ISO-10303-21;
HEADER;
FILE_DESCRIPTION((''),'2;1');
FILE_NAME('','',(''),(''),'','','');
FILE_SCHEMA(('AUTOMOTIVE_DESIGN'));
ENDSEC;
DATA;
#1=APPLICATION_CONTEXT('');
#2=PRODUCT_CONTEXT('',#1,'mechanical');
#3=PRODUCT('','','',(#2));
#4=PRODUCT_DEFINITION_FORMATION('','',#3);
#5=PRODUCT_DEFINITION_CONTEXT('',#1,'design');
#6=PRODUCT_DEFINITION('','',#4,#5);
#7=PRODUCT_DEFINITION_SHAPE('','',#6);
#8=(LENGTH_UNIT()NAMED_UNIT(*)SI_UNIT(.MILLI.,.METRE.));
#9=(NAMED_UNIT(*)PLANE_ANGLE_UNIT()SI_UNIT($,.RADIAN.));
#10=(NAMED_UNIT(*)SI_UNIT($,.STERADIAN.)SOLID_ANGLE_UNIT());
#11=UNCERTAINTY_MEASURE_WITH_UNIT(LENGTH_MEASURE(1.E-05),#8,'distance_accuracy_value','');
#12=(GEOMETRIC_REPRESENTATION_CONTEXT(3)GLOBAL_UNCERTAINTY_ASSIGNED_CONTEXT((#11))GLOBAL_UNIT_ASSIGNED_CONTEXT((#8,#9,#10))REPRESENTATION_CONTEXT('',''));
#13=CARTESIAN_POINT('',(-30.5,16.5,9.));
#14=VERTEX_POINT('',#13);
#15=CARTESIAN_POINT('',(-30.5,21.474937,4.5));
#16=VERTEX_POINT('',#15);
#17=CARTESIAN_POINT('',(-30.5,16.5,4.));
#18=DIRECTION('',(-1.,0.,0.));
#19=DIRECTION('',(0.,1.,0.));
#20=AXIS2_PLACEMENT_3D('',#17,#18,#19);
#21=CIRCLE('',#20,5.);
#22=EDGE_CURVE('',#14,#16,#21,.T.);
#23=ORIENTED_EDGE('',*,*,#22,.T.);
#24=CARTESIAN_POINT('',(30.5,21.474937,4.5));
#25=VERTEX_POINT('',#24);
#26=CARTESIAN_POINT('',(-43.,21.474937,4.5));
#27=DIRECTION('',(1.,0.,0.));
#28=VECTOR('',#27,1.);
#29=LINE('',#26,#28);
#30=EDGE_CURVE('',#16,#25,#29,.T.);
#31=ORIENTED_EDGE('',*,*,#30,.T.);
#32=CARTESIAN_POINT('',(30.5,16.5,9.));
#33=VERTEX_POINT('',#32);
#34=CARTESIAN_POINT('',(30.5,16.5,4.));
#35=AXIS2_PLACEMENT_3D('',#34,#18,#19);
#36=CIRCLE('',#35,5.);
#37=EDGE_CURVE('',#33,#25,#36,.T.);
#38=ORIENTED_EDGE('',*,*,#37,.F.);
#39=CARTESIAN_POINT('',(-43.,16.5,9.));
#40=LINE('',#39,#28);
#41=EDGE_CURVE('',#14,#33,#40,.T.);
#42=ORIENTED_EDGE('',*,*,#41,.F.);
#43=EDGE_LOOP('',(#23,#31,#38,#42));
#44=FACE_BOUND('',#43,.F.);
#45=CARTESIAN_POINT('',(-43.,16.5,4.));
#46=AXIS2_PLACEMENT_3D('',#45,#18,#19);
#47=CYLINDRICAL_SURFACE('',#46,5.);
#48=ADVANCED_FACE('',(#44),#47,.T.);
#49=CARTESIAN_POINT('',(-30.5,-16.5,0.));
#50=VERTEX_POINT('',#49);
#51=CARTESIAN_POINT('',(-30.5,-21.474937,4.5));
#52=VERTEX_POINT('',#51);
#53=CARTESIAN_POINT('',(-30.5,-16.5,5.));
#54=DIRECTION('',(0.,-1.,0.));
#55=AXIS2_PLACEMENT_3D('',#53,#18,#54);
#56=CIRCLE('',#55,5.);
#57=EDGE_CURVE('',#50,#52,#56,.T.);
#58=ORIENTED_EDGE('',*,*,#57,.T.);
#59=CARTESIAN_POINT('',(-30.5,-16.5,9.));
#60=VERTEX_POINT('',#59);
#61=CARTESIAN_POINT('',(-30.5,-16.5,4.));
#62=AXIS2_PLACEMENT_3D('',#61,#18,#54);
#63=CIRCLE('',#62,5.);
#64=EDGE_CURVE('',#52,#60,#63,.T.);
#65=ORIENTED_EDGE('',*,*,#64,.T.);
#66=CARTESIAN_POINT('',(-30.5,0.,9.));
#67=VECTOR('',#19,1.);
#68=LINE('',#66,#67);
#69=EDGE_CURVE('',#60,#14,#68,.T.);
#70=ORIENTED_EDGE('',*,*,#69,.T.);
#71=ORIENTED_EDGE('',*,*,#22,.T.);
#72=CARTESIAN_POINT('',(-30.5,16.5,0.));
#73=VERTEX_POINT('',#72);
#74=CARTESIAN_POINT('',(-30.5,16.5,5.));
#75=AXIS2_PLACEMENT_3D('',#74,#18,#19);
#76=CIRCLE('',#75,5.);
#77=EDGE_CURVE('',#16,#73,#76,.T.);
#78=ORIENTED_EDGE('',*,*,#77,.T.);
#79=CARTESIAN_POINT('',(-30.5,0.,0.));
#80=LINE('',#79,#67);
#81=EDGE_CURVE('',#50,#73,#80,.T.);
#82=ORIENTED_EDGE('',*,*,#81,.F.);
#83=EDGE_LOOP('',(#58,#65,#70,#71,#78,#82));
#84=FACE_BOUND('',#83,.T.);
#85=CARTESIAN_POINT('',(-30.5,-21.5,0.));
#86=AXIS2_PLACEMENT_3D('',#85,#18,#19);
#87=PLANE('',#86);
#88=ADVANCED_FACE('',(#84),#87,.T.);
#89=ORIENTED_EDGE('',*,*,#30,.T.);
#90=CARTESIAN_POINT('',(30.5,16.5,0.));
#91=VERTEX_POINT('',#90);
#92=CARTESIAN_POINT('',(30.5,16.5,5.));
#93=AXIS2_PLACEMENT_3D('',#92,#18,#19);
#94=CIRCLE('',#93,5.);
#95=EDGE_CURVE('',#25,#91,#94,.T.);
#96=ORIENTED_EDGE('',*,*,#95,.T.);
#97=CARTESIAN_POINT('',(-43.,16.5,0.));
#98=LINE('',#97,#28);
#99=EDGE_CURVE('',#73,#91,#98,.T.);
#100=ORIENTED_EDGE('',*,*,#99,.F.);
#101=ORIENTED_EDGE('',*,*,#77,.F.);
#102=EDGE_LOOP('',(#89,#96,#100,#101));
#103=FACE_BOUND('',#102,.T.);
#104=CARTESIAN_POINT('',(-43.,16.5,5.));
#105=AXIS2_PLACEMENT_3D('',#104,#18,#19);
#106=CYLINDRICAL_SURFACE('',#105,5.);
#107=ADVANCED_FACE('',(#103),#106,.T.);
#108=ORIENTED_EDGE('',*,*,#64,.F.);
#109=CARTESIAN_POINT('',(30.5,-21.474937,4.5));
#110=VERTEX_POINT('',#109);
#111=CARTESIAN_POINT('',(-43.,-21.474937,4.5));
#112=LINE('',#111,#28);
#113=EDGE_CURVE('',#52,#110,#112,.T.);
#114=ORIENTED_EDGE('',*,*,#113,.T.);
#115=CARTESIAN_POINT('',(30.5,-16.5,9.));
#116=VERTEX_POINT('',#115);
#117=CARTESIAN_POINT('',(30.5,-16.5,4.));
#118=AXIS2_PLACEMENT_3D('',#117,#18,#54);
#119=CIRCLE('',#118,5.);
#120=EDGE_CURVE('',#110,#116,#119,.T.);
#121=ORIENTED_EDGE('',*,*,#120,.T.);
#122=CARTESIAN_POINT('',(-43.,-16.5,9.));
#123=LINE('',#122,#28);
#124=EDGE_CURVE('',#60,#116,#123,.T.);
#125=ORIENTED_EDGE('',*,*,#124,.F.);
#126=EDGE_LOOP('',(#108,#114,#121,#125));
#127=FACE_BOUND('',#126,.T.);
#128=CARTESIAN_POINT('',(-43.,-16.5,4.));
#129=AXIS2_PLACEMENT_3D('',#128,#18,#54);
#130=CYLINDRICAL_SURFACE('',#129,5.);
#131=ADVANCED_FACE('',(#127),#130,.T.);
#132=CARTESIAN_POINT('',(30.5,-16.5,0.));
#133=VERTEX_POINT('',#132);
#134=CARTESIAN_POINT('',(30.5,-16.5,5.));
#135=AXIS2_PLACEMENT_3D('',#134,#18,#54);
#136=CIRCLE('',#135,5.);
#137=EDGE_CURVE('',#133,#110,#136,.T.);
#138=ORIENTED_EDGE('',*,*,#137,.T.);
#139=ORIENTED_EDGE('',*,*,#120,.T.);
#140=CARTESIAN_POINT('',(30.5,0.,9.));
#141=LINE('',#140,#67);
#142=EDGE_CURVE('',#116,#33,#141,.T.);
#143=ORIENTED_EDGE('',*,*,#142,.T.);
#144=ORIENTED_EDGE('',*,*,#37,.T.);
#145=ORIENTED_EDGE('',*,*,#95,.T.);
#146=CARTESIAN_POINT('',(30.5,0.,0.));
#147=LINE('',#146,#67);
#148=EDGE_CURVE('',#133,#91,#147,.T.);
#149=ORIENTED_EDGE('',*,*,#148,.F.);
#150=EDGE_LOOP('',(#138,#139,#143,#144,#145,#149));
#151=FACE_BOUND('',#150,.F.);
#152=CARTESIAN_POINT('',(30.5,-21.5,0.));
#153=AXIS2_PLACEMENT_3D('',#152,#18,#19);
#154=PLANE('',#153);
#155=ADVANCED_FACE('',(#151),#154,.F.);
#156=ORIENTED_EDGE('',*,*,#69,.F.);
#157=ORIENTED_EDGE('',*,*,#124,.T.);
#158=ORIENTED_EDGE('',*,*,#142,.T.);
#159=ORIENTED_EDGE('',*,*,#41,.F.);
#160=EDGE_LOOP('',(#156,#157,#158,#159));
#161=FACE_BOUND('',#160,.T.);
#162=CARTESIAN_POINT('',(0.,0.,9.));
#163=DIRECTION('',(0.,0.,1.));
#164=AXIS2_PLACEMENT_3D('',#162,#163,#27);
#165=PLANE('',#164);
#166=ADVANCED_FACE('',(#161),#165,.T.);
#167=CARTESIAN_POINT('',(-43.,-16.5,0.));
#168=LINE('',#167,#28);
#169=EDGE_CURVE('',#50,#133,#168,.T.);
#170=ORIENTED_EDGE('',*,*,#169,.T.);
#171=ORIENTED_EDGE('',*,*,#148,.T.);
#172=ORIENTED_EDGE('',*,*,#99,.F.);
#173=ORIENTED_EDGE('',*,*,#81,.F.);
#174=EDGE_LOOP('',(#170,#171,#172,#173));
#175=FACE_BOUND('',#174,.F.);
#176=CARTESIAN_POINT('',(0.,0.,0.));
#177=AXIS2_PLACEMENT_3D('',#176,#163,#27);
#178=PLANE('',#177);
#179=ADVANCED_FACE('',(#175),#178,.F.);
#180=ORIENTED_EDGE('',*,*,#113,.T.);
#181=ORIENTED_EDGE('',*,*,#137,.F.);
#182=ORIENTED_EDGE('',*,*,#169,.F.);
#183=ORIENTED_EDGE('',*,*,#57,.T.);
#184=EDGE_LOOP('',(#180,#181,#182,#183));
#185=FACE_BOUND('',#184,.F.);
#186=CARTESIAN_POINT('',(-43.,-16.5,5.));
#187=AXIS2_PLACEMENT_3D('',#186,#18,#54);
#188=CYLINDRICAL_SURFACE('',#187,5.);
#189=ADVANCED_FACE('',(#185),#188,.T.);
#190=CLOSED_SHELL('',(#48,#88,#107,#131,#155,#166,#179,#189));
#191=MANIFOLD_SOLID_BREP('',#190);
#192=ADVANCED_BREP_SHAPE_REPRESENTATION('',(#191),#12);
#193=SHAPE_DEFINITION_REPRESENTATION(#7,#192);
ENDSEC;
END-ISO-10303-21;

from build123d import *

# Parameters (mm, degrees)
F0_W        = 61
F0_H        = 43
F1_DEPTH    = 9
F2_T1_DEPTH = 86


# Not quite as in the source:
# - a fillet or chamfer that OpenCascade refuses, or shapes differently, is made with other operations: its cross-section is extruded or revolved along the edge and cut away or added


with BuildPart() as f1:
    # F0 (on Top) → F1 (new body)
    with BuildSketch(Plane.XY):
        Rectangle(F0_W, F0_H)
    extrude(amount=F1_DEPTH)

    # F2: fillet of radius 5 on 4 edges, made by hand

    # F2_s2 → F2_t1 (cut)
    with BuildSketch(Plane.YZ.offset(-43)):
        with BuildLine():
            ThreePointArc((21.5, 4), (20.0355339059, 7.5355339059), (16.5, 9))
            Line((16.5, 9), (21.5, 9))
            Line((21.5, 9), (21.5, 4))
        make_face()
        with BuildLine():
            ThreePointArc((-21.5, 4), (-20.0355339059, 7.5355339059), (-16.5, 9))
            Line((-16.5, 9), (-21.5, 9))
            Line((-21.5, 9), (-21.5, 4))
        make_face()
        with BuildLine():
            ThreePointArc((-21.5, 5), (-20.0355339059, 1.4644660941), (-16.5, 0))
            Line((-16.5, 0), (-21.5, 0))
            Line((-21.5, 0), (-21.5, 5))
        make_face()
        with BuildLine():
            ThreePointArc((21.5, 5), (20.0355339059, 1.4644660941), (16.5, 0))
            Line((16.5, 0), (21.5, 0))
            Line((21.5, 0), (21.5, 5))
        make_face()
    extrude(amount=F2_T1_DEPTH, mode=Mode.SUBTRACT)


solid = f1.part
